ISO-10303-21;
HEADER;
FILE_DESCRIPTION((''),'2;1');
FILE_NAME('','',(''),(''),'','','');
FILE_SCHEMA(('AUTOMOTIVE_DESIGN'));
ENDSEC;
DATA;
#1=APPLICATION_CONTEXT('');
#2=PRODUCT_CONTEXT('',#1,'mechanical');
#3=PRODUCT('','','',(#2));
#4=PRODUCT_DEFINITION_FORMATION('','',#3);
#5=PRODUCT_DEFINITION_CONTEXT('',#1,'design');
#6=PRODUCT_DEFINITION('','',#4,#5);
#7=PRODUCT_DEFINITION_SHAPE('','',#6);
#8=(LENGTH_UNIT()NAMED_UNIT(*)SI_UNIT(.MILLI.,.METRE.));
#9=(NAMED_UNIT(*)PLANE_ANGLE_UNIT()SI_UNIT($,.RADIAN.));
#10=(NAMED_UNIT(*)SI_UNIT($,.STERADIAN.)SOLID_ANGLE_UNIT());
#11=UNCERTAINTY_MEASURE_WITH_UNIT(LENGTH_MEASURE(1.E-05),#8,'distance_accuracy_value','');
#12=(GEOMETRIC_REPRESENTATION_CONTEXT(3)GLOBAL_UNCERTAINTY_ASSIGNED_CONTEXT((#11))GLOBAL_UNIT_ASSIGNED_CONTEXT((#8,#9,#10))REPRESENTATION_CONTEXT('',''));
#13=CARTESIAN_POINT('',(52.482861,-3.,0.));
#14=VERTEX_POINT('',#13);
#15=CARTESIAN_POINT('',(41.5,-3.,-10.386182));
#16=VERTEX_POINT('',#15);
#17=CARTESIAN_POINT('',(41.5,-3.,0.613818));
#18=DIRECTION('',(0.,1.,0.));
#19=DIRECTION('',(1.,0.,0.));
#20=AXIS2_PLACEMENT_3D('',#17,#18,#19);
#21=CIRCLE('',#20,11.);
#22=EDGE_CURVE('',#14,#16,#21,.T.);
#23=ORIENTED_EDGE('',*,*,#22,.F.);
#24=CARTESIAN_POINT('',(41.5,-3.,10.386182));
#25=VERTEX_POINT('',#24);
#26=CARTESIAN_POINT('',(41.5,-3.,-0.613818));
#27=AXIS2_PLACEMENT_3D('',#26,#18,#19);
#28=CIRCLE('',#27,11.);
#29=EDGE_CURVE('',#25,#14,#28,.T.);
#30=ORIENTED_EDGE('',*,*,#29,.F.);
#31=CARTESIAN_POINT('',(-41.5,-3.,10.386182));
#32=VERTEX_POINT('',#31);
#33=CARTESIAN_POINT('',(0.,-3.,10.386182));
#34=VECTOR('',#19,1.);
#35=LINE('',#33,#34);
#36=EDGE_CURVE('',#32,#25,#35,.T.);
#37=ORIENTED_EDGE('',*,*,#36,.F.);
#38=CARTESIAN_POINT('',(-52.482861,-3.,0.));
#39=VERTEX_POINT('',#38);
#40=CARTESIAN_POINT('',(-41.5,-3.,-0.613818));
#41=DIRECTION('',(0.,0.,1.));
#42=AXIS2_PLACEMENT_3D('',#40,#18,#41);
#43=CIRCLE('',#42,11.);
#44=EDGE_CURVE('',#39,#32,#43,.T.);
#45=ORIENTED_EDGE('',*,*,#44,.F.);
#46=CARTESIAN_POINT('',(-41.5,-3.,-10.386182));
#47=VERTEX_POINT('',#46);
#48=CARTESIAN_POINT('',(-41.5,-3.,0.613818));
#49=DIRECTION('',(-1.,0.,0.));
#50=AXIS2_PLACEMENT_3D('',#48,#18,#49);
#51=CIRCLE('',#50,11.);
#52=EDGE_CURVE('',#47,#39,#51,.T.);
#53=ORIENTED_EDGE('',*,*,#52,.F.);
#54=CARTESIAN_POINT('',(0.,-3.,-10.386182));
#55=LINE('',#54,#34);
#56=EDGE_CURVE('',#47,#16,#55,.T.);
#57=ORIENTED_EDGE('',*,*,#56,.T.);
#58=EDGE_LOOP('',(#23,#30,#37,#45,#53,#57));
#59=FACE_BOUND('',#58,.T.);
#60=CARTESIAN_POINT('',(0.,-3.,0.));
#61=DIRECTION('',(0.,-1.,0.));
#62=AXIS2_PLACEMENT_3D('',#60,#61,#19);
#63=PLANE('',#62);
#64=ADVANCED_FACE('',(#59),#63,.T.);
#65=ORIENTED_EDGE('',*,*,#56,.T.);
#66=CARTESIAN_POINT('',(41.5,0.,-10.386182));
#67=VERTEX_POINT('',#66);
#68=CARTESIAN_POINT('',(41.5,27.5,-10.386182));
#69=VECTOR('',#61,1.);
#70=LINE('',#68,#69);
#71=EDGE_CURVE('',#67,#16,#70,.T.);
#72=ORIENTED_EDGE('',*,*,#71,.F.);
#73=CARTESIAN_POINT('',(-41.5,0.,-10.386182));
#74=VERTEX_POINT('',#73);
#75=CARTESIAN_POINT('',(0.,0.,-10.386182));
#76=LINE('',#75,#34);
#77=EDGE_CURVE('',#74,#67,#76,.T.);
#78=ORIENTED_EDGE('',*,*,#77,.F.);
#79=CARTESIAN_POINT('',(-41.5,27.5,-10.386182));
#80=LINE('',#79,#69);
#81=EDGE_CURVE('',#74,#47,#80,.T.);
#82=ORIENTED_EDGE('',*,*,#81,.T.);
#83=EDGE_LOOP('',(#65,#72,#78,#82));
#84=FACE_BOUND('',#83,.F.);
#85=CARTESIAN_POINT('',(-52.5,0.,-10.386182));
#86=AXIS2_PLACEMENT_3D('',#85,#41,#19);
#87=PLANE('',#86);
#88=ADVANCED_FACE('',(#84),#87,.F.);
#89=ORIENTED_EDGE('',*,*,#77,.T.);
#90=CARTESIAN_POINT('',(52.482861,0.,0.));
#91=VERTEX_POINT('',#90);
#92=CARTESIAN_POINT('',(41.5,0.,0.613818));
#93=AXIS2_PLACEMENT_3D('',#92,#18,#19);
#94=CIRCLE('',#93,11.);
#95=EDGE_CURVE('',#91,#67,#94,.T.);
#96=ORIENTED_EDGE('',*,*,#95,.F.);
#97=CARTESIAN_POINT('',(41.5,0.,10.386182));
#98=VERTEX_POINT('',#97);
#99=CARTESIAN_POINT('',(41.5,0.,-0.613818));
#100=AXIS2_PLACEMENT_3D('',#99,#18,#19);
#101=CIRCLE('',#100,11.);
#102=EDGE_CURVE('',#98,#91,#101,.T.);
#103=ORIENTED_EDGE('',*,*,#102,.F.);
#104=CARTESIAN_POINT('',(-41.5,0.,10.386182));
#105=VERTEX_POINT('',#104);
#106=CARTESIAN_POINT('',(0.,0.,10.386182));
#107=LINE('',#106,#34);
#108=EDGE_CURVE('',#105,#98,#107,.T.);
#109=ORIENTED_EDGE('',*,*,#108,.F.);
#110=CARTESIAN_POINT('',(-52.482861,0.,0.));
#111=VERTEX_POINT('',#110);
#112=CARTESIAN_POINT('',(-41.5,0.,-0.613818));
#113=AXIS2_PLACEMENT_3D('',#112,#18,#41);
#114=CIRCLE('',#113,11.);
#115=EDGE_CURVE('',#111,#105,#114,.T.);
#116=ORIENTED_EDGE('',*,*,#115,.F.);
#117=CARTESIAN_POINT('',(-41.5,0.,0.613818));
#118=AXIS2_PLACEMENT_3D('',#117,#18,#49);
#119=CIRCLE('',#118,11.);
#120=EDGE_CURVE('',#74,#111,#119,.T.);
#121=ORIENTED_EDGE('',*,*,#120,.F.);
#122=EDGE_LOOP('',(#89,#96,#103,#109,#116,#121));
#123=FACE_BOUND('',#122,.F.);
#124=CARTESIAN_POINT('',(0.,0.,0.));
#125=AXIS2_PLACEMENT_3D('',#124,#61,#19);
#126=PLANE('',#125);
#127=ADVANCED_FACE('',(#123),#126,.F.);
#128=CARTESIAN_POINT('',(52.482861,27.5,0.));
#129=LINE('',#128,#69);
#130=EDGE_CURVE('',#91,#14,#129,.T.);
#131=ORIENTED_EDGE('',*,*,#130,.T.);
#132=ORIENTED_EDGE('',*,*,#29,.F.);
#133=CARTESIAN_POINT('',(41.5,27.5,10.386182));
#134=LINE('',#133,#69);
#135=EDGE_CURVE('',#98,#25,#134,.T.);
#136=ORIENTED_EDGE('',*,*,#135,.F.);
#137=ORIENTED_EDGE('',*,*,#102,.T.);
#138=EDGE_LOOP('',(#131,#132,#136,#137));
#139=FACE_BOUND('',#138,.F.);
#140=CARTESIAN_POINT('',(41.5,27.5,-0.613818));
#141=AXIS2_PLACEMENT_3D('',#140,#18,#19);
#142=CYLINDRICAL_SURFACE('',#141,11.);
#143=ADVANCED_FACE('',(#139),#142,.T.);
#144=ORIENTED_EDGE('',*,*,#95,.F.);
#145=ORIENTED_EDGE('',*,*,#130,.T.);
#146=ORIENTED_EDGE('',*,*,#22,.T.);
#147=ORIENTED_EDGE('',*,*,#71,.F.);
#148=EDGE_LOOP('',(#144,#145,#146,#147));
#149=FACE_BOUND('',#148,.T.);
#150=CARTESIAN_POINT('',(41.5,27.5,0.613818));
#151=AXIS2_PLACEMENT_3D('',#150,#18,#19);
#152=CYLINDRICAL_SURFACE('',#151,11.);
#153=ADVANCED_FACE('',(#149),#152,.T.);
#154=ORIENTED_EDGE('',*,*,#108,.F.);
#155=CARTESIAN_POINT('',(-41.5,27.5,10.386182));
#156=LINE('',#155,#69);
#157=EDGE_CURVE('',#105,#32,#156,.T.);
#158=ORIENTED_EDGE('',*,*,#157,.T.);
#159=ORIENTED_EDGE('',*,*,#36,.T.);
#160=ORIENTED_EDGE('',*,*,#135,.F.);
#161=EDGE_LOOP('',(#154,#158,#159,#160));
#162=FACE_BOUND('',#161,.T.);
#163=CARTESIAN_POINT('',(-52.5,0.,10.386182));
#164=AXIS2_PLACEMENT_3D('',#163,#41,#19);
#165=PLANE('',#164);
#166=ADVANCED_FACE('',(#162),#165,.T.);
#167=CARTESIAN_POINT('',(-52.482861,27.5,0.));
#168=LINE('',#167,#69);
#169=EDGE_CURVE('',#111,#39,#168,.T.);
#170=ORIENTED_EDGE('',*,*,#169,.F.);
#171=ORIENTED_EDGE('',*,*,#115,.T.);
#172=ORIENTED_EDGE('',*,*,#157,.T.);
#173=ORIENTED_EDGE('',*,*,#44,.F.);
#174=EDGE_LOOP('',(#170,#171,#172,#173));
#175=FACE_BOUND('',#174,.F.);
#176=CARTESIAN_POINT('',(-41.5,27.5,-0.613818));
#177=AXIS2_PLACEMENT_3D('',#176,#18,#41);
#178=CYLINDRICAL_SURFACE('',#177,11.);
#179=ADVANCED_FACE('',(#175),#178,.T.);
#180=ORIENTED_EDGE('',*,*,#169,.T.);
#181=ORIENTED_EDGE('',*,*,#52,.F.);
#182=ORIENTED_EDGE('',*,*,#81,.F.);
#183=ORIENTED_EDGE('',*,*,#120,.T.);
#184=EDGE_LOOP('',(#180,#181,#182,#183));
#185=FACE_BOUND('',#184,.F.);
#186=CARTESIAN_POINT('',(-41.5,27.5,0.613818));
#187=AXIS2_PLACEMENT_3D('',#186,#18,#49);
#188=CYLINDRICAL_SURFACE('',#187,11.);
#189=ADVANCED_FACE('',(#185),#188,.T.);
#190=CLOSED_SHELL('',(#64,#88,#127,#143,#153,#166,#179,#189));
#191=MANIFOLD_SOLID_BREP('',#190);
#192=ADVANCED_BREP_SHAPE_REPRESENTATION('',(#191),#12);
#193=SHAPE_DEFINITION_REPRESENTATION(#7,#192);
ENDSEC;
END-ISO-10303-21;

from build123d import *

# Parameters (mm, degrees)
F0_W        = 105
F0_H        = 20.7723644742
F1_DEPTH    = 3
F2_T1_DEPTH = 58


# Not quite as in the source:
# - a fillet or chamfer that OpenCascade refuses, or shapes differently, is made with other operations: its cross-section is extruded or revolved along the edge and cut away or added


with BuildPart() as f1:
    # F0 (on Front) → F1 (new body)
    with BuildSketch(Plane.XZ):
        Rectangle(F0_W, F0_H)
    extrude(amount=F1_DEPTH)

    # F2: fillet of radius 11 on 4 edges, made by hand

    # F2_s2 → F2_t1 (cut)
    with BuildSketch(Plane.XZ.offset(-27.5)):
        with BuildLine():
            ThreePointArc((-41.5, 10.3861822371), (-49.2781745931, 7.1643568302), (-52.5, -0.6138177629))
            Line((-52.5, -0.6138177629), (-52.5, 10.3861822371))
            Line((-52.5, 10.3861822371), (-41.5, 10.3861822371))
        make_face()
        with BuildLine():
            ThreePointArc((-52.5, 0.6138177629), (-49.2781745931, -7.1643568302), (-41.5, -10.3861822371))
            Line((-41.5, -10.3861822371), (-52.5, -10.3861822371))
            Line((-52.5, -10.3861822371), (-52.5, 0.6138177629))
        make_face()
        with BuildLine():
            ThreePointArc((52.5, -0.6138177629), (49.2781745931, 7.1643568302), (41.5, 10.3861822371))
            Line((41.5, 10.3861822371), (52.5, 10.3861822371))
            Line((52.5, 10.3861822371), (52.5, -0.6138177629))
        make_face()
        with BuildLine():
            ThreePointArc((52.5, 0.6138177629), (49.2781745931, -7.1643568302), (41.5, -10.3861822371))
            Line((41.5, -10.3861822371), (52.5, -10.3861822371))
            Line((52.5, -10.3861822371), (52.5, 0.6138177629))
        make_face()
    extrude(amount=F2_T1_DEPTH, mode=Mode.SUBTRACT)


solid = f1.part
